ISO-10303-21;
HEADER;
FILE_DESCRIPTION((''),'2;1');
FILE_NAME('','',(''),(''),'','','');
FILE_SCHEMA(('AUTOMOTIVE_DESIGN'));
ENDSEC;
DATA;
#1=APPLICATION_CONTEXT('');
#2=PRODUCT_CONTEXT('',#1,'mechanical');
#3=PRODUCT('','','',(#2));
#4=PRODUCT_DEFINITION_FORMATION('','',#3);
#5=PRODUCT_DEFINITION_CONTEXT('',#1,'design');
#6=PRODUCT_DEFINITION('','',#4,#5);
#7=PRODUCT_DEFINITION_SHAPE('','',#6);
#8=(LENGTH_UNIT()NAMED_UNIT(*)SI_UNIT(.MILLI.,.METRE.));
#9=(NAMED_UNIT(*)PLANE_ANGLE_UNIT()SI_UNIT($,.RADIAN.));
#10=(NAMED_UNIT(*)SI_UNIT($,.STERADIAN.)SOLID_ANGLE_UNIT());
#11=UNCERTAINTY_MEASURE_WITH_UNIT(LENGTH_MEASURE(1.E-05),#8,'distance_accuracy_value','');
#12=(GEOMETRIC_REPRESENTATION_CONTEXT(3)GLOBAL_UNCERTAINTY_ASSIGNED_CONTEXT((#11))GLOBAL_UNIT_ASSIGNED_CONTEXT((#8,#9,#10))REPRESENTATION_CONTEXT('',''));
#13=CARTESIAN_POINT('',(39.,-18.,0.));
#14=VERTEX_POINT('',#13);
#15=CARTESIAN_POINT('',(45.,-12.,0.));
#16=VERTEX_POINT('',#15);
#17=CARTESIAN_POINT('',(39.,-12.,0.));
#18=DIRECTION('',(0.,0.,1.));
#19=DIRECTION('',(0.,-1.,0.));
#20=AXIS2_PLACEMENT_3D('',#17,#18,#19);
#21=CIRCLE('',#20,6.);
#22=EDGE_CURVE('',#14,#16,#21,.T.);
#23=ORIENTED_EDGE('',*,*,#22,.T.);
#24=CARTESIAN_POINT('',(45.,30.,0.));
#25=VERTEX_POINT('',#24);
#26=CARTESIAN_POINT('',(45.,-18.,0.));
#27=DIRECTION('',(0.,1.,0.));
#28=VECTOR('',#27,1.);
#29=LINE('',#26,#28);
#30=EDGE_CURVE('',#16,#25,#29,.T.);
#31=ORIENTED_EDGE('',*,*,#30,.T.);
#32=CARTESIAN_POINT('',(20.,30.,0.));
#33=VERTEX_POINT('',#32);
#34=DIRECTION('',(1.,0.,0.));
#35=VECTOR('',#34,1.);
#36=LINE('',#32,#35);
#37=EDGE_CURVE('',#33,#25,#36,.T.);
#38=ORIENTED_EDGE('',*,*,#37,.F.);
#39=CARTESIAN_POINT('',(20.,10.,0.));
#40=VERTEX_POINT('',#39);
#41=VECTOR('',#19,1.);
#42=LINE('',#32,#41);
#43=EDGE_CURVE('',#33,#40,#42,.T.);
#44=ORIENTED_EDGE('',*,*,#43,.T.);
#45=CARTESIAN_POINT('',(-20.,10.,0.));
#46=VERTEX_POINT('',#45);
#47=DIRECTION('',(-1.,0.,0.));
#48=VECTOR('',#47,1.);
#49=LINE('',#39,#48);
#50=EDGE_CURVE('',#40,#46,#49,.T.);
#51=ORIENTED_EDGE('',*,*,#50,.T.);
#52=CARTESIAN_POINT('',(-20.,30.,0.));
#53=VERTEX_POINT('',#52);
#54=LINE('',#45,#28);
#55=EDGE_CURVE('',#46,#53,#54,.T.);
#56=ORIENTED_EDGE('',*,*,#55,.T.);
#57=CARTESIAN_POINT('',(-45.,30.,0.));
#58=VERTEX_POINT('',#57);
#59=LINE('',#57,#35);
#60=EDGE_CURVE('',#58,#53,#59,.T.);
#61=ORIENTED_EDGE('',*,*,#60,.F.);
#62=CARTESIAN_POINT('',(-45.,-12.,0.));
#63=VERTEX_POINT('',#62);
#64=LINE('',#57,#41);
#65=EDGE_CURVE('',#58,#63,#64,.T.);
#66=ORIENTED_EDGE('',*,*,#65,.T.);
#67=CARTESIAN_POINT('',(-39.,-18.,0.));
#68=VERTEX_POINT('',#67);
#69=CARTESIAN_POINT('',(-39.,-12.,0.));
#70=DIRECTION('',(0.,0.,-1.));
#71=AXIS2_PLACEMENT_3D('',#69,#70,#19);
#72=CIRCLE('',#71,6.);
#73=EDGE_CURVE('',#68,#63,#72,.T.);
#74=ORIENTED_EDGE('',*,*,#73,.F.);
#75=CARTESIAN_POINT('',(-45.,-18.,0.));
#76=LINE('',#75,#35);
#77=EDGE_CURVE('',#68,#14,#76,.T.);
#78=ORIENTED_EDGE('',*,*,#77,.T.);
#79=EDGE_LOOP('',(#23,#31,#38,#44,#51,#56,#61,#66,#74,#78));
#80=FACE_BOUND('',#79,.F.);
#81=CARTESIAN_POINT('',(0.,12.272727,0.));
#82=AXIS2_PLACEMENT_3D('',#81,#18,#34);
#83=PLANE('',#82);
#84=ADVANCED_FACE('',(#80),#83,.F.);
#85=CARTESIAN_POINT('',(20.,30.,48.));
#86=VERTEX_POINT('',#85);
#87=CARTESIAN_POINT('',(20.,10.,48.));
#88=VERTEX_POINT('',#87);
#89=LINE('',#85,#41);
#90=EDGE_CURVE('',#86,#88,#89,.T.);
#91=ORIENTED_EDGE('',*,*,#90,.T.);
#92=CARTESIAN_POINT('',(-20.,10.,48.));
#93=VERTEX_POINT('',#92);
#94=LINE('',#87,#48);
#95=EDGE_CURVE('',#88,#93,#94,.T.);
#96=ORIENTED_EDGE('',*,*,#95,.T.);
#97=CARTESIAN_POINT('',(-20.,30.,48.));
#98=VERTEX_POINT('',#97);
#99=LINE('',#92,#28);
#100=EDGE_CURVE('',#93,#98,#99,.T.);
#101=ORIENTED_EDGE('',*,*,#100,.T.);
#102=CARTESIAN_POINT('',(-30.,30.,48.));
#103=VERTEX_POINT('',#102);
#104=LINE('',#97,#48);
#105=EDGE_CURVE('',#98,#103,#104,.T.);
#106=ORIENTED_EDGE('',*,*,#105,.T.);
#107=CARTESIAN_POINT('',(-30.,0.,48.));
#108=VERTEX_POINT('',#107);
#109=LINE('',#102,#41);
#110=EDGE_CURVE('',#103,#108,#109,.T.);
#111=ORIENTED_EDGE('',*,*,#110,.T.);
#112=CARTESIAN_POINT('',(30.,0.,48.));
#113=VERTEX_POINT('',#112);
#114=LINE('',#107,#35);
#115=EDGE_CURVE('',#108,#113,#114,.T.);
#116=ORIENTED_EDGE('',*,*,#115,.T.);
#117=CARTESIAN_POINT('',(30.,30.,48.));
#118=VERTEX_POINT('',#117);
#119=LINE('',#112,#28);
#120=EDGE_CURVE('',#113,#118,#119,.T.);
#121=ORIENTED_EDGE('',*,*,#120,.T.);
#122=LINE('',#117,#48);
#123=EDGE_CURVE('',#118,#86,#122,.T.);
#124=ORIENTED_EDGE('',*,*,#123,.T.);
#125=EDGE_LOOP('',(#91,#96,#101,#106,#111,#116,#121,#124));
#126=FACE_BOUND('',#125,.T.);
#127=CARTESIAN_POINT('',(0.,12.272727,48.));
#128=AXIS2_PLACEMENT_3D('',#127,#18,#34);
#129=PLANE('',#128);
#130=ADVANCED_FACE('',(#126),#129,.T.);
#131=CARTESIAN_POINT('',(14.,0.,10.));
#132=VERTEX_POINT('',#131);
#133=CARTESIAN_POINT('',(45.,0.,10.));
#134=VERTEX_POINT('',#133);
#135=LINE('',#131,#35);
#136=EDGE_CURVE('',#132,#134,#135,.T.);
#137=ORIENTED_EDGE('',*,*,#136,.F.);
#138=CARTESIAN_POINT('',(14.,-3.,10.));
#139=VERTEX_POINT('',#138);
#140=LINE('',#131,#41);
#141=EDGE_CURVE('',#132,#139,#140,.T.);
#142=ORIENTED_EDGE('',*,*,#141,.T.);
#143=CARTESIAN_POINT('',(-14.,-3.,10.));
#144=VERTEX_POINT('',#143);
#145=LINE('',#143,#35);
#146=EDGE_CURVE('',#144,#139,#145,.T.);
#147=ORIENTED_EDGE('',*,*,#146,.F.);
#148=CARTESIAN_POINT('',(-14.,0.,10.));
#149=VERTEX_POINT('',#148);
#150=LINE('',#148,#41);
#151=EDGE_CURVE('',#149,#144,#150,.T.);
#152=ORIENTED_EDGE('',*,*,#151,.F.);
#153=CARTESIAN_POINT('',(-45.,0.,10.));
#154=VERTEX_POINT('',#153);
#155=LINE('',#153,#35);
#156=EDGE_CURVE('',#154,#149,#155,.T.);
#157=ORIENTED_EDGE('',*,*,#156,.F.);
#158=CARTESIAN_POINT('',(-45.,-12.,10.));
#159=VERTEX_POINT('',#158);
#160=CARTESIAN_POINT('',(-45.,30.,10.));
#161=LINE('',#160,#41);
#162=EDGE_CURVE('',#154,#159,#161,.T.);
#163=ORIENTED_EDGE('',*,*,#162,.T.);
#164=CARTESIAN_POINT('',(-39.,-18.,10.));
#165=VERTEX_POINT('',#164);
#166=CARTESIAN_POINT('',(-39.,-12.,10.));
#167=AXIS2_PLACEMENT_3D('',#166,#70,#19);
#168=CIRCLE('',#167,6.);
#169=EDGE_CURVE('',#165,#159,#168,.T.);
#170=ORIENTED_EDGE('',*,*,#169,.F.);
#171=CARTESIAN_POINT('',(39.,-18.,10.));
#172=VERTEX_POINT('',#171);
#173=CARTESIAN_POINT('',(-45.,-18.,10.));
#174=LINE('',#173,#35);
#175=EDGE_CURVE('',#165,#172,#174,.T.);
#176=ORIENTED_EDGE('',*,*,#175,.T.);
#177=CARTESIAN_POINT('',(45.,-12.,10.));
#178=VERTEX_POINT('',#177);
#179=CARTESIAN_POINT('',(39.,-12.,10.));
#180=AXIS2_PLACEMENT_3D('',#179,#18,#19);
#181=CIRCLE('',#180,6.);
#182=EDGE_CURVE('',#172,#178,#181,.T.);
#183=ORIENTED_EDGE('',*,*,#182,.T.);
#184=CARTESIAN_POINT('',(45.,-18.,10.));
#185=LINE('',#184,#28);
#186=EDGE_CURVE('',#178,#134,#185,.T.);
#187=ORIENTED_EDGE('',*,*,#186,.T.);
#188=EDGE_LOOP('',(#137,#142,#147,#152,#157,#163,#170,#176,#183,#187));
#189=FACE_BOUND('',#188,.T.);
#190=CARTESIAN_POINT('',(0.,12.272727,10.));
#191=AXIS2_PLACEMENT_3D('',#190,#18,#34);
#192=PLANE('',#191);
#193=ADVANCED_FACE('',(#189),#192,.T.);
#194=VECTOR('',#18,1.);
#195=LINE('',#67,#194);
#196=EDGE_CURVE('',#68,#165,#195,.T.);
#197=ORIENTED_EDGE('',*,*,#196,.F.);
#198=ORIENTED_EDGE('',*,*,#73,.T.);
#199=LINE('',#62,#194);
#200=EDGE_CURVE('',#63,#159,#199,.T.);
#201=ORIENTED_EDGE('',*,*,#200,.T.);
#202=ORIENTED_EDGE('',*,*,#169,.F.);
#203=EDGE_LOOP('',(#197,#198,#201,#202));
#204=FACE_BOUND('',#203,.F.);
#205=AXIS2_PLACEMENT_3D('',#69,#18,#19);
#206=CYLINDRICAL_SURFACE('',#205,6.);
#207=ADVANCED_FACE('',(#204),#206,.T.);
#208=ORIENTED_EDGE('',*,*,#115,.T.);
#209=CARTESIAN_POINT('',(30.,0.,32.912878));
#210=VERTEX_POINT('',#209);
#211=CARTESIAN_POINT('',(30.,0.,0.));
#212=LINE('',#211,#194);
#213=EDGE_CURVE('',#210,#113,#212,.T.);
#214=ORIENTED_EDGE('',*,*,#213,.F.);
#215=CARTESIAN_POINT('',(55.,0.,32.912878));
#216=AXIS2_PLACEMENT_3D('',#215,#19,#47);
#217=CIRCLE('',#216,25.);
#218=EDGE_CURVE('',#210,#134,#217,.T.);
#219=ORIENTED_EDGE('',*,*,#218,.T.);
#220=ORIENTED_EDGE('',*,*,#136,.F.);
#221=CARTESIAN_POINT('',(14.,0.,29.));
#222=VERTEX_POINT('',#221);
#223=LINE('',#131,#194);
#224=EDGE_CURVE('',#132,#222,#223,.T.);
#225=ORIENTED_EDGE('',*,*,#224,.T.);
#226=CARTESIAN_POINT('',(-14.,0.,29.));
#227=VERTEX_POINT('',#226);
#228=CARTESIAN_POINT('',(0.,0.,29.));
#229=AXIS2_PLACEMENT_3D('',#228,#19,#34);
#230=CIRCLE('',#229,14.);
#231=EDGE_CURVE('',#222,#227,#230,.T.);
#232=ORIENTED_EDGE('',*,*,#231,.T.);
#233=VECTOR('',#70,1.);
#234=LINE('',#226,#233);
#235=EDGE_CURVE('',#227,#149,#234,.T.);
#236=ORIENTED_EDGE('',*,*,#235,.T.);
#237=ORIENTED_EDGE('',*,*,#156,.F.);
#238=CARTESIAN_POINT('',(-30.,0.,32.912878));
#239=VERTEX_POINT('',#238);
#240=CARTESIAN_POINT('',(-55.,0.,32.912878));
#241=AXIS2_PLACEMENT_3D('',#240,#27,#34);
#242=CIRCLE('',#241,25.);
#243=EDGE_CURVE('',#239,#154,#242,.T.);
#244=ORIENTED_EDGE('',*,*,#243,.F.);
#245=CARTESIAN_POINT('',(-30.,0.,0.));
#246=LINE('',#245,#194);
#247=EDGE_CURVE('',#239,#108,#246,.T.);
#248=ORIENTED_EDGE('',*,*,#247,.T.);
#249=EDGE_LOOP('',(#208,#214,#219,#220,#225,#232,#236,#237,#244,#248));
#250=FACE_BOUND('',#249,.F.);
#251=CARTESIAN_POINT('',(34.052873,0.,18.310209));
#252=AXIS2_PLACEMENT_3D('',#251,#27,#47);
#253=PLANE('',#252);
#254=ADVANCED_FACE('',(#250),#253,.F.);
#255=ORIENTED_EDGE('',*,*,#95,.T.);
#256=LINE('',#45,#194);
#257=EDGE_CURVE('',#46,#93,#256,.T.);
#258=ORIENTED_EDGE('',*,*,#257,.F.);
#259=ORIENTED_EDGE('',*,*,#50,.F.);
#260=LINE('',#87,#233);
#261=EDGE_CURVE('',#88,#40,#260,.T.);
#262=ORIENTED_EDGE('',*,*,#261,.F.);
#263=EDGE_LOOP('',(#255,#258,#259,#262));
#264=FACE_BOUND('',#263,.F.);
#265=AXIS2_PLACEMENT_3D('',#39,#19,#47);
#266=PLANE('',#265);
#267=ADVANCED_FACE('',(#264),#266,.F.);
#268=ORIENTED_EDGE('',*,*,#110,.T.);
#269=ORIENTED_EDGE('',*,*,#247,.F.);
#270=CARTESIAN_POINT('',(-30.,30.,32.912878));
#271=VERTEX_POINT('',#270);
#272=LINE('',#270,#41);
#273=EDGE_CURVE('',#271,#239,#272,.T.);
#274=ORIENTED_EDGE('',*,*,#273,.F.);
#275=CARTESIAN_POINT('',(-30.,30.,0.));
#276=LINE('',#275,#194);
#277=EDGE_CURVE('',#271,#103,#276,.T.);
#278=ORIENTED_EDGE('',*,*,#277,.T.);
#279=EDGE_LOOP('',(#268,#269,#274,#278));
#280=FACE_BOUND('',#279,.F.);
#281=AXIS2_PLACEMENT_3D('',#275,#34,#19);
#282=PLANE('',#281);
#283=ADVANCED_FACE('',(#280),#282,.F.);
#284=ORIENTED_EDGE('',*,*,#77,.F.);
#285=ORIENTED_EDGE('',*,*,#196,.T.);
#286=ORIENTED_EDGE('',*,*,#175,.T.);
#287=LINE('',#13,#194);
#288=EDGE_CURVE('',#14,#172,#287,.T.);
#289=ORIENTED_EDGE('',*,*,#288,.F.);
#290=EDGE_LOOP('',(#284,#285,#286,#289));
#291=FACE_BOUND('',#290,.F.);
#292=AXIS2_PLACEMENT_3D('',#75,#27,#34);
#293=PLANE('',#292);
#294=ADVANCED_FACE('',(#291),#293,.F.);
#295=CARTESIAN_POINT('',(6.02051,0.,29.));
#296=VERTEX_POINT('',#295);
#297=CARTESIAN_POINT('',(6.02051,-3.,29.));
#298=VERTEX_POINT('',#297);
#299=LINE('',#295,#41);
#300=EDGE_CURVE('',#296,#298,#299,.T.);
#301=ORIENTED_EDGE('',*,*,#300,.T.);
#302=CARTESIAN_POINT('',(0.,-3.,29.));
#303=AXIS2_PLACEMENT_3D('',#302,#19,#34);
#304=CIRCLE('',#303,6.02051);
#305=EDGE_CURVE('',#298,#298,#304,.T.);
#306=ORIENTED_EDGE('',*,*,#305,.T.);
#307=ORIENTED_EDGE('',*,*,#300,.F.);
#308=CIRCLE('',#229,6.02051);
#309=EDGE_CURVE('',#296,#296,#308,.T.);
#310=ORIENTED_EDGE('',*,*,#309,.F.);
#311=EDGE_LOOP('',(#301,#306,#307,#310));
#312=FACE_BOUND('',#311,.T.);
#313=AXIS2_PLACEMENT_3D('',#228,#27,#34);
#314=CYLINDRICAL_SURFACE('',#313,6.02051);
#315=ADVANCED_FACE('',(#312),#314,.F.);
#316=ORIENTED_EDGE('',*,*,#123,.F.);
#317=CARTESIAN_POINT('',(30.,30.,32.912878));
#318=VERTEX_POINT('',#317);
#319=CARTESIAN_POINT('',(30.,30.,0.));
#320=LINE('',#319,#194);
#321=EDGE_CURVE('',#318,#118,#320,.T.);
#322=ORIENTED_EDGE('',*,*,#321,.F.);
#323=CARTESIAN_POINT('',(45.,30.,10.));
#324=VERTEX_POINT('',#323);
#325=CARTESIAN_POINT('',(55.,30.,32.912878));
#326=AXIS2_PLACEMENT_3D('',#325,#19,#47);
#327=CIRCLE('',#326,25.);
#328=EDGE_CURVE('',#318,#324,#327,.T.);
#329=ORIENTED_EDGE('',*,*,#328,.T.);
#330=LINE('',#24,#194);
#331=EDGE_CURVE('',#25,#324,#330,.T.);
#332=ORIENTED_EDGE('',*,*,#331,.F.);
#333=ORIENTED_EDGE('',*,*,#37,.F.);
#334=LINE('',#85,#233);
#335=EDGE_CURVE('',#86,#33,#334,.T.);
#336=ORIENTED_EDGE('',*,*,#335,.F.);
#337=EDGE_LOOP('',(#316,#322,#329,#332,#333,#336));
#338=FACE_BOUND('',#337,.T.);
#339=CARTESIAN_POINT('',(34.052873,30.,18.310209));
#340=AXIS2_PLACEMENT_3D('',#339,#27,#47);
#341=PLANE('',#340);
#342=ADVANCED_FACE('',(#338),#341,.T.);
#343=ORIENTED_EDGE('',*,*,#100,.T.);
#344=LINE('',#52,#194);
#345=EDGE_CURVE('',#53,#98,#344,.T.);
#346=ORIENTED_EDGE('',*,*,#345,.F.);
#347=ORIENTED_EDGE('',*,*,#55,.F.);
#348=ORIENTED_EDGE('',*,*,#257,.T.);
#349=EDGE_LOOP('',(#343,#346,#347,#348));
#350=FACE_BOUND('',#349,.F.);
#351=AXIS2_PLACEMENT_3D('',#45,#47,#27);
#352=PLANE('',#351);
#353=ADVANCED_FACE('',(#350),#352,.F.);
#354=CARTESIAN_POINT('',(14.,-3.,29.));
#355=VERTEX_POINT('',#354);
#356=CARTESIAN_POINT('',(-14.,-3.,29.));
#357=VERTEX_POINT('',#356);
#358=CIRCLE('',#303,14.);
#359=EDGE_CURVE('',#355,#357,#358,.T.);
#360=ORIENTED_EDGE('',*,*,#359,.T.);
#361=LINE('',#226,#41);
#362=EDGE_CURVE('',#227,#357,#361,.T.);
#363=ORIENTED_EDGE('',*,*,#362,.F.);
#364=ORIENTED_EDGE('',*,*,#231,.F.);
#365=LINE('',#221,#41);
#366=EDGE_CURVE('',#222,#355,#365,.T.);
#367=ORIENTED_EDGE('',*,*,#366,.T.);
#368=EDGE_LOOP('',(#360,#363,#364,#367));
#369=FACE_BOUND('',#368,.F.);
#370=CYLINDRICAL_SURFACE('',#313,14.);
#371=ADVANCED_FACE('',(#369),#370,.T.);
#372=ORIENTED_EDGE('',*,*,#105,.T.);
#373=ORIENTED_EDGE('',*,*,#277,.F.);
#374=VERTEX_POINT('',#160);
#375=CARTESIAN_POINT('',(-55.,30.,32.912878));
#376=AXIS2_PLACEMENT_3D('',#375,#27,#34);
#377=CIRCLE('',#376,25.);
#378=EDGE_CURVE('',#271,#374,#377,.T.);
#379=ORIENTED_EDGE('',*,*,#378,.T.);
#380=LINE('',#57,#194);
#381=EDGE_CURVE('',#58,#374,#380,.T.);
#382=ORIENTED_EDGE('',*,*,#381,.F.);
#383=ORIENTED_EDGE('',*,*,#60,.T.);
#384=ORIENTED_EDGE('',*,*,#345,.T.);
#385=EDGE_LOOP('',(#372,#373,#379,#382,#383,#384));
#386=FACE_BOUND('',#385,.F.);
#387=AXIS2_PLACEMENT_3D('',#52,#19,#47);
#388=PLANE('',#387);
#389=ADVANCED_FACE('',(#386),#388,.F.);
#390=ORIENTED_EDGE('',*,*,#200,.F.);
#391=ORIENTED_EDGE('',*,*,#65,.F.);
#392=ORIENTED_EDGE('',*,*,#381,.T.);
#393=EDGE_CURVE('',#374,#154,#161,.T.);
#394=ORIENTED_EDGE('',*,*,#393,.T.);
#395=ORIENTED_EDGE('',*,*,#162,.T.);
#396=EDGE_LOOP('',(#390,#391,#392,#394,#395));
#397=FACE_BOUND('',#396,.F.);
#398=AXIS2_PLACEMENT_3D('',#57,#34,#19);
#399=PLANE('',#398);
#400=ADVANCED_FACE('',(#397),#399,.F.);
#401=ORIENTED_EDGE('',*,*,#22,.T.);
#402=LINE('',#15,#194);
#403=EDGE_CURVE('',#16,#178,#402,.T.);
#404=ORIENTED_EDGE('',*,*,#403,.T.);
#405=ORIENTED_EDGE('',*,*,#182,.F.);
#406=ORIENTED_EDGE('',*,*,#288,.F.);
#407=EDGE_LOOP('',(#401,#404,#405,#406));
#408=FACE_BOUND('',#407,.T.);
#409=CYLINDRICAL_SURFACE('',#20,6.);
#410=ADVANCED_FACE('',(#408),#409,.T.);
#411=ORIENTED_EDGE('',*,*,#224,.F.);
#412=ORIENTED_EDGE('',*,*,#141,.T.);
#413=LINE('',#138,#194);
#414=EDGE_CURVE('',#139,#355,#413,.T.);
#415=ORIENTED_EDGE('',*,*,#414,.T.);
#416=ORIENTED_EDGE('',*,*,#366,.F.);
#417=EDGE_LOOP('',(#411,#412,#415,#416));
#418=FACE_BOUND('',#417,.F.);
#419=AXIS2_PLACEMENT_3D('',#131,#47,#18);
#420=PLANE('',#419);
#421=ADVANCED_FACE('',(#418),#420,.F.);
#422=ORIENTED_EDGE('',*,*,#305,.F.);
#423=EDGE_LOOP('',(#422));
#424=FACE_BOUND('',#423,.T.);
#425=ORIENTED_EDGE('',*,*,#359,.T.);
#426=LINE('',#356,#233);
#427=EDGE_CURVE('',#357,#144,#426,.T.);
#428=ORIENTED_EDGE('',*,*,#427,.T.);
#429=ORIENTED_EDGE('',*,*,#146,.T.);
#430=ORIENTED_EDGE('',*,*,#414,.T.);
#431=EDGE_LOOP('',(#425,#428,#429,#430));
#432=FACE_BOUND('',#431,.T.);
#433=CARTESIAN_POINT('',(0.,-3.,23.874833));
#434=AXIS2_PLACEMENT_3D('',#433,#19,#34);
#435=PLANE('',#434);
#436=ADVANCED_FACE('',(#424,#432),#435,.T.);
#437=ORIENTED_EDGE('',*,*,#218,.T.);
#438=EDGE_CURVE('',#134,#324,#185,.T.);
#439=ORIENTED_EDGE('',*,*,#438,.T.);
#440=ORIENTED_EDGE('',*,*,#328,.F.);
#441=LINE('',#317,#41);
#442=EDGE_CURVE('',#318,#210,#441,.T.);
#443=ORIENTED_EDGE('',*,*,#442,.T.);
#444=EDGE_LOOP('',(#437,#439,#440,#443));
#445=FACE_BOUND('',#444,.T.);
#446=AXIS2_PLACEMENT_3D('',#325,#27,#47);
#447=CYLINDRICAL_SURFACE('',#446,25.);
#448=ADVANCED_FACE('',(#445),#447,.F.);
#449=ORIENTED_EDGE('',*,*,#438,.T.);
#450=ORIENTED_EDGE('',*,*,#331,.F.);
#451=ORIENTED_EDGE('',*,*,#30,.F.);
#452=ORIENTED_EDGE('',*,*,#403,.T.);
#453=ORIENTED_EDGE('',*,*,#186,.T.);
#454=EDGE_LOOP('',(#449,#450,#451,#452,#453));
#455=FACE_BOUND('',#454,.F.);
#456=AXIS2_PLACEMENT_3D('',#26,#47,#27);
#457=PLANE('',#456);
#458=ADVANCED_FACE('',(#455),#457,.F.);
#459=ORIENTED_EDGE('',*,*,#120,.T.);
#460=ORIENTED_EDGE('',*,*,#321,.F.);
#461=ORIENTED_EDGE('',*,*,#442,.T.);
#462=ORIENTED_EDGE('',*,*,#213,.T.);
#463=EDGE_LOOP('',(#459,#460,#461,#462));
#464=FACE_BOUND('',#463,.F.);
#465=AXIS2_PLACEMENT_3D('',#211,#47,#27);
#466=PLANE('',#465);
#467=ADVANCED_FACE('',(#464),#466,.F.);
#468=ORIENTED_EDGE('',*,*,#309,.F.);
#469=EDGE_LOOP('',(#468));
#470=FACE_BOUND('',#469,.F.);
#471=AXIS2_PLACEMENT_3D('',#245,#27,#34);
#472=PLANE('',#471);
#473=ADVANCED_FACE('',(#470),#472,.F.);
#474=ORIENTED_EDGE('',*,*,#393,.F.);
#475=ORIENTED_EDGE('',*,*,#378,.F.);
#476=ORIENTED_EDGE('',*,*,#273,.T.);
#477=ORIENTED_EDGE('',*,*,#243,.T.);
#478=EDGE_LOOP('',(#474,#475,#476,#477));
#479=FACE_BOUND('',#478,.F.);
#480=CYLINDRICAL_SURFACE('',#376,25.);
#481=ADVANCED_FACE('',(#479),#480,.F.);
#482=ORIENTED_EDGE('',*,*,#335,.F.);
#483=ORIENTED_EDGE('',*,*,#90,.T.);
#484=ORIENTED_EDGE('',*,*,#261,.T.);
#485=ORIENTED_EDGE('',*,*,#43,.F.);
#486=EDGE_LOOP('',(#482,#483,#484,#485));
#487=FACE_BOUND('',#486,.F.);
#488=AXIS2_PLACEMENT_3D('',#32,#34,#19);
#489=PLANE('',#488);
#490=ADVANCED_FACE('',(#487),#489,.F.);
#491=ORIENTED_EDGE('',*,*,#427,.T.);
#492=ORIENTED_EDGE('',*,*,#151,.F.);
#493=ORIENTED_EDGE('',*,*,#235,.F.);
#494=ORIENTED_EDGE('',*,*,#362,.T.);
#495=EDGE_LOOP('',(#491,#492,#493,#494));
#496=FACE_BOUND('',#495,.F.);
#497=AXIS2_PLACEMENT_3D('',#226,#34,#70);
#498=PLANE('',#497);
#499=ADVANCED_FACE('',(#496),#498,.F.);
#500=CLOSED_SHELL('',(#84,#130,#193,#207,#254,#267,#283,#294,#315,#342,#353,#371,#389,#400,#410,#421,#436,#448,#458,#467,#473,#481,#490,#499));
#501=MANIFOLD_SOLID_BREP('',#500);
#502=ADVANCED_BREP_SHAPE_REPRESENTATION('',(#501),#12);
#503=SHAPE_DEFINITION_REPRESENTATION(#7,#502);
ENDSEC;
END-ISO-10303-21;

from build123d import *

# Parameters (mm, degrees)
F1_DEPTH    = 48
F2_DEPTH    = 10
F3_R        = 6.0205101074
F4_DEPTH    = 3
F5_T1_DEPTH = 30
F6_R        = 6


# Not quite as in the source:
# - a fillet or chamfer that OpenCascade refuses, or shapes differently, is made with other operations: its cross-section is extruded or revolved along the edge and cut away or added


with BuildPart() as f1:
    # F0 (on Top) → F1 (new body)
    with BuildSketch(Plane.XY):
        Polygon((20, 10), (0, 10), (-20, 10), (-20, 30), (-30, 30), (-30, 0), (0, 0), (30, 0), (30, 30), (20, 30), align=None)
    extrude(amount=F1_DEPTH)

    # F0 (on Top) → F2 (join)
    with BuildSketch(Plane.XY):
        Polygon((20, 10), (0, 10), (-20, 10), (-20, 30), (-30, 30), (-30, 0), (0, 0), (30, 0), (30, 30), (20, 30), align=None)
        Polygon((-30, 0), (-30, 30), (-45, 30), (-45, -18), (0, -18), (45, -18), (45, 30), (30, 30), (30, 0), (0, 0), align=None)
    extrude(amount=F2_DEPTH)

    # F3 (on Front) → F4 (join)
    with BuildSketch(Plane.XZ):
        with BuildLine():
            Line((14, 10), (14, 29))
            ThreePointArc((14, 29), (0, 43), (-14, 29))
            Line((-14, 29), (-14, 10))
            Line((-14, 10), (14, 10))
        make_face()
        with Locations((0, 29)):
            Circle(F3_R, mode=Mode.SUBTRACT)
    extrude(amount=F4_DEPTH)

    # F5: fillet of radius 25 on 2 edges, made by hand

    # F5_s2 → F5_t1 (join)
    with BuildSketch(Plane.XZ.offset(-30)):
        with BuildLine():
            ThreePointArc((30, 32.9128784748), (34.0834993366, 19.2198145372), (45, 10))
            Line((45, 10), (30, 10))
            Line((30, 10), (30, 32.9128784748))
        make_face()
        with BuildLine():
            ThreePointArc((-30, 32.9128784748), (-34.0834993366, 19.2198145372), (-45, 10))
            Line((-45, 10), (-30, 10))
            Line((-30, 10), (-30, 32.9128784748))
        make_face()
    extrude(amount=F5_T1_DEPTH)

    # F6
    f6_edges = [f1.edges().sort_by_distance(p)[0] for p in [
        (-45, -18, 5),
        (45, -18, 5),
    ]]
    fillet(f6_edges, radius=F6_R)


solid = f1.part
